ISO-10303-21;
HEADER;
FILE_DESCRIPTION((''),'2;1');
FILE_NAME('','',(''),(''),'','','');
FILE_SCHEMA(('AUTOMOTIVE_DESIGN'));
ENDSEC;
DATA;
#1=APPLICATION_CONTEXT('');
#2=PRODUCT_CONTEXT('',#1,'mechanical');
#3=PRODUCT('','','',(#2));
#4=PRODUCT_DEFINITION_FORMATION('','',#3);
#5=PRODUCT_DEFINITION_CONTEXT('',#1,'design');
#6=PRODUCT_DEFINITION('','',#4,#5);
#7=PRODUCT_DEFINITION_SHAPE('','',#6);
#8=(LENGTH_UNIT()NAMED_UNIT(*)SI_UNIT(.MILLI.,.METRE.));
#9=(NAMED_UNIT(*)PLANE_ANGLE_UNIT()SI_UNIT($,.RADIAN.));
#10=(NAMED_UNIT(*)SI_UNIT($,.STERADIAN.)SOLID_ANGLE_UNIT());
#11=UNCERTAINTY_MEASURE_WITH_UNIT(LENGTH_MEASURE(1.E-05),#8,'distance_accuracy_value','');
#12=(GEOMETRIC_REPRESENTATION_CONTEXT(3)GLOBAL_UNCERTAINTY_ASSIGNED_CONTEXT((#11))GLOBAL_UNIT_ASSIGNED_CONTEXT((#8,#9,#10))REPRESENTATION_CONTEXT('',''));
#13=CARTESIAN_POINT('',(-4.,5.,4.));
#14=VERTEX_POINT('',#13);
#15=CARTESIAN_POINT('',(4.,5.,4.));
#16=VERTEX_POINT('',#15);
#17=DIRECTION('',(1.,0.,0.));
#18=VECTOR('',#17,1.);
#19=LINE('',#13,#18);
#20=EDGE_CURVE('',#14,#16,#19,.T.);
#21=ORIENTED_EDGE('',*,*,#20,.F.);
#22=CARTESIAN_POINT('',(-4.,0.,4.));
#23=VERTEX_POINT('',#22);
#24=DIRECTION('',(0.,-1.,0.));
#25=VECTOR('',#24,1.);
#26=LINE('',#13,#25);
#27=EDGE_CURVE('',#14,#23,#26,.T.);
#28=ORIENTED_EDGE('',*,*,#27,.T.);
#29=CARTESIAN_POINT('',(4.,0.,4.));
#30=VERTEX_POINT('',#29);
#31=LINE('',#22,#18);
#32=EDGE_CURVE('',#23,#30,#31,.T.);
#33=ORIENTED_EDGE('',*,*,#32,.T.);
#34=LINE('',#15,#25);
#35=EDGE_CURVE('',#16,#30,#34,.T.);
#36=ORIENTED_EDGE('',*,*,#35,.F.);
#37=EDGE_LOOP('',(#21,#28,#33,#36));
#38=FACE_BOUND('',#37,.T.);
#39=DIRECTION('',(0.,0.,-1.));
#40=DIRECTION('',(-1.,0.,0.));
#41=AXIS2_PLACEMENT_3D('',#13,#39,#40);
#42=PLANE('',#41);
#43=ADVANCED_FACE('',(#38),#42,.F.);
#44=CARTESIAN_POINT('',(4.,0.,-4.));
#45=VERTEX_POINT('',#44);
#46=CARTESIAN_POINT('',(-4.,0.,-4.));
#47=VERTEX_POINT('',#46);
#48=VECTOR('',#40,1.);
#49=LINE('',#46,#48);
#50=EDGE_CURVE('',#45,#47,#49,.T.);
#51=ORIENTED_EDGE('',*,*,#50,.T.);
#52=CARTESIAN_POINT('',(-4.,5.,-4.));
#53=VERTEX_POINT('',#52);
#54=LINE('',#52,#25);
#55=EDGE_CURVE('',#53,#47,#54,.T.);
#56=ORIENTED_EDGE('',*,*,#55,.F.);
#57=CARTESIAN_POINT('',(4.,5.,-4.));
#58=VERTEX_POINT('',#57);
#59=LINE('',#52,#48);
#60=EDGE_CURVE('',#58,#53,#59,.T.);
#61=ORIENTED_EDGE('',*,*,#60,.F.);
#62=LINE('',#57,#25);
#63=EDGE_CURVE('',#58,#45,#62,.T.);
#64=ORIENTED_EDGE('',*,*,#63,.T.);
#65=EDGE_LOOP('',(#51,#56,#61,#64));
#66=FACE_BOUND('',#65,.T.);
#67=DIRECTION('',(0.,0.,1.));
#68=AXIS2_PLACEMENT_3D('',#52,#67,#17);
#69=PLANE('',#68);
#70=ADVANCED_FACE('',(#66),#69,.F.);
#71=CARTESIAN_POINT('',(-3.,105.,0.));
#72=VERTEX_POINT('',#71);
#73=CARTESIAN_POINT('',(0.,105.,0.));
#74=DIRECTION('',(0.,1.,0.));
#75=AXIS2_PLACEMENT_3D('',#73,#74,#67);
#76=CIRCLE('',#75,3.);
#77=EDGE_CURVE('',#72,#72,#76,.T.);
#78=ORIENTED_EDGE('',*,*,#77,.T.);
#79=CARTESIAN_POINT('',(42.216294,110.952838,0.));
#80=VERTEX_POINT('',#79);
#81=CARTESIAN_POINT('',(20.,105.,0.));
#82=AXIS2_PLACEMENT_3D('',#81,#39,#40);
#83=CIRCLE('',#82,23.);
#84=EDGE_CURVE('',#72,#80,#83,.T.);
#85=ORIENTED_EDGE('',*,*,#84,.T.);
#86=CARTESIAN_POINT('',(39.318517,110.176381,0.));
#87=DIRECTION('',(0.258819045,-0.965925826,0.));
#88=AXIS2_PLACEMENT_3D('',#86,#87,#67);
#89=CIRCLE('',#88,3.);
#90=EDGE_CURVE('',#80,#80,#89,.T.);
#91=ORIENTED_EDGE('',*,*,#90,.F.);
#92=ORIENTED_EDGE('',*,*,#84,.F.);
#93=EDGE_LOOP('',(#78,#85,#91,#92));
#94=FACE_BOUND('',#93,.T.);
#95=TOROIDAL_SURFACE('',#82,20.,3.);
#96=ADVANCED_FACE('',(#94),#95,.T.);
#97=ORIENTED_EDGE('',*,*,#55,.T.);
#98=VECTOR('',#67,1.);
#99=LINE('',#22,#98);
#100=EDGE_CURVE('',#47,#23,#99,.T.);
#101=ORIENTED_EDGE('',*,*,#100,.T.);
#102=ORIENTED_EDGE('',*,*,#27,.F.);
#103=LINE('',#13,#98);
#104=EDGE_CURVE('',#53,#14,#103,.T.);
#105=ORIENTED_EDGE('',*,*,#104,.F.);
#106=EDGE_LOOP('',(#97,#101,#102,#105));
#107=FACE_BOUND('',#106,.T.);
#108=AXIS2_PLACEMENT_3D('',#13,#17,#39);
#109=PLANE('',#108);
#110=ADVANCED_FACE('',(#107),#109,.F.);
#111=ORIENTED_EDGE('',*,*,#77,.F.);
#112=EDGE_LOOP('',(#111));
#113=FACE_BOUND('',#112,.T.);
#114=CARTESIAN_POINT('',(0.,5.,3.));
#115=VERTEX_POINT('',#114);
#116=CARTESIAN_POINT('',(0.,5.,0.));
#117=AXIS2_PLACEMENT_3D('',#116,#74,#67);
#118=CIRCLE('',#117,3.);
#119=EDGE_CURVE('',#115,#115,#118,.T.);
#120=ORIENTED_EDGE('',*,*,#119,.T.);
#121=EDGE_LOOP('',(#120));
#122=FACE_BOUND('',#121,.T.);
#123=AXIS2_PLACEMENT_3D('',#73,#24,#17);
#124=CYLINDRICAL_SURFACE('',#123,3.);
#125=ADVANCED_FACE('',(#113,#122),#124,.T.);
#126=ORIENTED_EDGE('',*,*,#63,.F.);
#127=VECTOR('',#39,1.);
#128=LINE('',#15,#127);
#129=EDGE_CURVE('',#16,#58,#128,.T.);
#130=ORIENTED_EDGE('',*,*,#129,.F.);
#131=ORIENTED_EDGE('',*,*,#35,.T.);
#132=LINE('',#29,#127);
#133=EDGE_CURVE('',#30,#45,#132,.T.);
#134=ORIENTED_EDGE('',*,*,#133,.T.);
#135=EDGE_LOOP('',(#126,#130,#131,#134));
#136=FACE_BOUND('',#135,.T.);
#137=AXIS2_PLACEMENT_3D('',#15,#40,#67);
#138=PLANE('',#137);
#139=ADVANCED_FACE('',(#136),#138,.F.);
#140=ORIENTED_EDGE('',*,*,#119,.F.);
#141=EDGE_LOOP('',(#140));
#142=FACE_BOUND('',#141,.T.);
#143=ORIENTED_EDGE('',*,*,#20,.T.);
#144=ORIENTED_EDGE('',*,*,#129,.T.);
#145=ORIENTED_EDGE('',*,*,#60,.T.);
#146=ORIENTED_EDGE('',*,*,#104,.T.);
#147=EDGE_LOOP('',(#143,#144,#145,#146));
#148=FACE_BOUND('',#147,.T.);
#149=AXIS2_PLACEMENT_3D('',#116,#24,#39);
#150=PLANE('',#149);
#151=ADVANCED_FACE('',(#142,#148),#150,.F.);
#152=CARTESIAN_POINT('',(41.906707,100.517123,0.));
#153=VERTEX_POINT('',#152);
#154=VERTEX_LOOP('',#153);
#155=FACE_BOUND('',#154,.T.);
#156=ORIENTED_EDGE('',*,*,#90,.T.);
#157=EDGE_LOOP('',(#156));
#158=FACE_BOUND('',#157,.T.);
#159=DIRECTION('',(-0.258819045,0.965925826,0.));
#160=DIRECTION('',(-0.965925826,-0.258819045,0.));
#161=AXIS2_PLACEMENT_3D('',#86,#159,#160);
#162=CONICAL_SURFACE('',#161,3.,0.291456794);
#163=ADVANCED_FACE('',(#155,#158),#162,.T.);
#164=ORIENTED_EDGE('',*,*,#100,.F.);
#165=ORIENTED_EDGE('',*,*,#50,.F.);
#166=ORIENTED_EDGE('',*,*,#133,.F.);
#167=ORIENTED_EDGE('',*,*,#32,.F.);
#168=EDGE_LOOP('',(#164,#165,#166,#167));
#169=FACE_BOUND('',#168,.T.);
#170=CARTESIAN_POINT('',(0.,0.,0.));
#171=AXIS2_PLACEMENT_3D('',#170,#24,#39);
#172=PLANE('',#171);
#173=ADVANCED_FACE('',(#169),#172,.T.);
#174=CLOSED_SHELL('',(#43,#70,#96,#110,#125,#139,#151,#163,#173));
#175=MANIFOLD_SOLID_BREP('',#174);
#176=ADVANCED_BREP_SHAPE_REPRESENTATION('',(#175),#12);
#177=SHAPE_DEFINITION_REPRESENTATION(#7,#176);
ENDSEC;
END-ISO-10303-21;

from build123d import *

# Parameters (mm, degrees)
SKETCH1_W           = 8
SKETCH1_H           = 8
BOSS_EXTRUDE1_DEPTH = 5
SKETCH3_R           = 3
CHAMFER1_SIZE2      = 3
CHAMFER1_SIZE       = 10


with BuildPart() as part:
    # Sketch1 → Boss-Extrude1 (new body)
    with BuildSketch(Plane(origin=(0, 0, 0), x_dir=(1, 0, 0), z_dir=(0, 1, 0))):
        Rectangle(SKETCH1_W, SKETCH1_H)
    extrude(amount=BOSS_EXTRUDE1_DEPTH)

    # Sweep1: sweep along a path in Sketch2
    with BuildLine(Plane.XY) as sweep1_path:
        Line((0, 5), (0, 105))
        ThreePointArc((0, 105), (17.389476156, 124.828897227), (39.318516526, 110.176380902))
        Line((39.318516526, 110.176380902), (41.906706977, 100.517122639))
    # Sketch3 → Sweep1 (sweep)
    with BuildSketch(Plane(origin=(0, 5, 0), x_dir=(1, 0, 0), z_dir=(0, 1, 0))):
        Circle(SKETCH3_R)
    sweep(path=sweep1_path.line)

    # Chamfer1
    chamfer1_edges = [part.edges().sort_by_distance(p)[0] for p in [
        (44.804484456, 101.293579774, 0),
    ]]
    chamfer1_side = [part.faces().sort_by_distance(p)[0] for p in [
        (44.788955313, 101.351535324, 0),
    ]]
    chamfer(chamfer1_edges, length=CHAMFER1_SIZE - 0.0001, length2=CHAMFER1_SIZE2 - 0.0001, reference=chamfer1_side[0])  # a hair under: the kernel refuses the full size


solid = part.part
